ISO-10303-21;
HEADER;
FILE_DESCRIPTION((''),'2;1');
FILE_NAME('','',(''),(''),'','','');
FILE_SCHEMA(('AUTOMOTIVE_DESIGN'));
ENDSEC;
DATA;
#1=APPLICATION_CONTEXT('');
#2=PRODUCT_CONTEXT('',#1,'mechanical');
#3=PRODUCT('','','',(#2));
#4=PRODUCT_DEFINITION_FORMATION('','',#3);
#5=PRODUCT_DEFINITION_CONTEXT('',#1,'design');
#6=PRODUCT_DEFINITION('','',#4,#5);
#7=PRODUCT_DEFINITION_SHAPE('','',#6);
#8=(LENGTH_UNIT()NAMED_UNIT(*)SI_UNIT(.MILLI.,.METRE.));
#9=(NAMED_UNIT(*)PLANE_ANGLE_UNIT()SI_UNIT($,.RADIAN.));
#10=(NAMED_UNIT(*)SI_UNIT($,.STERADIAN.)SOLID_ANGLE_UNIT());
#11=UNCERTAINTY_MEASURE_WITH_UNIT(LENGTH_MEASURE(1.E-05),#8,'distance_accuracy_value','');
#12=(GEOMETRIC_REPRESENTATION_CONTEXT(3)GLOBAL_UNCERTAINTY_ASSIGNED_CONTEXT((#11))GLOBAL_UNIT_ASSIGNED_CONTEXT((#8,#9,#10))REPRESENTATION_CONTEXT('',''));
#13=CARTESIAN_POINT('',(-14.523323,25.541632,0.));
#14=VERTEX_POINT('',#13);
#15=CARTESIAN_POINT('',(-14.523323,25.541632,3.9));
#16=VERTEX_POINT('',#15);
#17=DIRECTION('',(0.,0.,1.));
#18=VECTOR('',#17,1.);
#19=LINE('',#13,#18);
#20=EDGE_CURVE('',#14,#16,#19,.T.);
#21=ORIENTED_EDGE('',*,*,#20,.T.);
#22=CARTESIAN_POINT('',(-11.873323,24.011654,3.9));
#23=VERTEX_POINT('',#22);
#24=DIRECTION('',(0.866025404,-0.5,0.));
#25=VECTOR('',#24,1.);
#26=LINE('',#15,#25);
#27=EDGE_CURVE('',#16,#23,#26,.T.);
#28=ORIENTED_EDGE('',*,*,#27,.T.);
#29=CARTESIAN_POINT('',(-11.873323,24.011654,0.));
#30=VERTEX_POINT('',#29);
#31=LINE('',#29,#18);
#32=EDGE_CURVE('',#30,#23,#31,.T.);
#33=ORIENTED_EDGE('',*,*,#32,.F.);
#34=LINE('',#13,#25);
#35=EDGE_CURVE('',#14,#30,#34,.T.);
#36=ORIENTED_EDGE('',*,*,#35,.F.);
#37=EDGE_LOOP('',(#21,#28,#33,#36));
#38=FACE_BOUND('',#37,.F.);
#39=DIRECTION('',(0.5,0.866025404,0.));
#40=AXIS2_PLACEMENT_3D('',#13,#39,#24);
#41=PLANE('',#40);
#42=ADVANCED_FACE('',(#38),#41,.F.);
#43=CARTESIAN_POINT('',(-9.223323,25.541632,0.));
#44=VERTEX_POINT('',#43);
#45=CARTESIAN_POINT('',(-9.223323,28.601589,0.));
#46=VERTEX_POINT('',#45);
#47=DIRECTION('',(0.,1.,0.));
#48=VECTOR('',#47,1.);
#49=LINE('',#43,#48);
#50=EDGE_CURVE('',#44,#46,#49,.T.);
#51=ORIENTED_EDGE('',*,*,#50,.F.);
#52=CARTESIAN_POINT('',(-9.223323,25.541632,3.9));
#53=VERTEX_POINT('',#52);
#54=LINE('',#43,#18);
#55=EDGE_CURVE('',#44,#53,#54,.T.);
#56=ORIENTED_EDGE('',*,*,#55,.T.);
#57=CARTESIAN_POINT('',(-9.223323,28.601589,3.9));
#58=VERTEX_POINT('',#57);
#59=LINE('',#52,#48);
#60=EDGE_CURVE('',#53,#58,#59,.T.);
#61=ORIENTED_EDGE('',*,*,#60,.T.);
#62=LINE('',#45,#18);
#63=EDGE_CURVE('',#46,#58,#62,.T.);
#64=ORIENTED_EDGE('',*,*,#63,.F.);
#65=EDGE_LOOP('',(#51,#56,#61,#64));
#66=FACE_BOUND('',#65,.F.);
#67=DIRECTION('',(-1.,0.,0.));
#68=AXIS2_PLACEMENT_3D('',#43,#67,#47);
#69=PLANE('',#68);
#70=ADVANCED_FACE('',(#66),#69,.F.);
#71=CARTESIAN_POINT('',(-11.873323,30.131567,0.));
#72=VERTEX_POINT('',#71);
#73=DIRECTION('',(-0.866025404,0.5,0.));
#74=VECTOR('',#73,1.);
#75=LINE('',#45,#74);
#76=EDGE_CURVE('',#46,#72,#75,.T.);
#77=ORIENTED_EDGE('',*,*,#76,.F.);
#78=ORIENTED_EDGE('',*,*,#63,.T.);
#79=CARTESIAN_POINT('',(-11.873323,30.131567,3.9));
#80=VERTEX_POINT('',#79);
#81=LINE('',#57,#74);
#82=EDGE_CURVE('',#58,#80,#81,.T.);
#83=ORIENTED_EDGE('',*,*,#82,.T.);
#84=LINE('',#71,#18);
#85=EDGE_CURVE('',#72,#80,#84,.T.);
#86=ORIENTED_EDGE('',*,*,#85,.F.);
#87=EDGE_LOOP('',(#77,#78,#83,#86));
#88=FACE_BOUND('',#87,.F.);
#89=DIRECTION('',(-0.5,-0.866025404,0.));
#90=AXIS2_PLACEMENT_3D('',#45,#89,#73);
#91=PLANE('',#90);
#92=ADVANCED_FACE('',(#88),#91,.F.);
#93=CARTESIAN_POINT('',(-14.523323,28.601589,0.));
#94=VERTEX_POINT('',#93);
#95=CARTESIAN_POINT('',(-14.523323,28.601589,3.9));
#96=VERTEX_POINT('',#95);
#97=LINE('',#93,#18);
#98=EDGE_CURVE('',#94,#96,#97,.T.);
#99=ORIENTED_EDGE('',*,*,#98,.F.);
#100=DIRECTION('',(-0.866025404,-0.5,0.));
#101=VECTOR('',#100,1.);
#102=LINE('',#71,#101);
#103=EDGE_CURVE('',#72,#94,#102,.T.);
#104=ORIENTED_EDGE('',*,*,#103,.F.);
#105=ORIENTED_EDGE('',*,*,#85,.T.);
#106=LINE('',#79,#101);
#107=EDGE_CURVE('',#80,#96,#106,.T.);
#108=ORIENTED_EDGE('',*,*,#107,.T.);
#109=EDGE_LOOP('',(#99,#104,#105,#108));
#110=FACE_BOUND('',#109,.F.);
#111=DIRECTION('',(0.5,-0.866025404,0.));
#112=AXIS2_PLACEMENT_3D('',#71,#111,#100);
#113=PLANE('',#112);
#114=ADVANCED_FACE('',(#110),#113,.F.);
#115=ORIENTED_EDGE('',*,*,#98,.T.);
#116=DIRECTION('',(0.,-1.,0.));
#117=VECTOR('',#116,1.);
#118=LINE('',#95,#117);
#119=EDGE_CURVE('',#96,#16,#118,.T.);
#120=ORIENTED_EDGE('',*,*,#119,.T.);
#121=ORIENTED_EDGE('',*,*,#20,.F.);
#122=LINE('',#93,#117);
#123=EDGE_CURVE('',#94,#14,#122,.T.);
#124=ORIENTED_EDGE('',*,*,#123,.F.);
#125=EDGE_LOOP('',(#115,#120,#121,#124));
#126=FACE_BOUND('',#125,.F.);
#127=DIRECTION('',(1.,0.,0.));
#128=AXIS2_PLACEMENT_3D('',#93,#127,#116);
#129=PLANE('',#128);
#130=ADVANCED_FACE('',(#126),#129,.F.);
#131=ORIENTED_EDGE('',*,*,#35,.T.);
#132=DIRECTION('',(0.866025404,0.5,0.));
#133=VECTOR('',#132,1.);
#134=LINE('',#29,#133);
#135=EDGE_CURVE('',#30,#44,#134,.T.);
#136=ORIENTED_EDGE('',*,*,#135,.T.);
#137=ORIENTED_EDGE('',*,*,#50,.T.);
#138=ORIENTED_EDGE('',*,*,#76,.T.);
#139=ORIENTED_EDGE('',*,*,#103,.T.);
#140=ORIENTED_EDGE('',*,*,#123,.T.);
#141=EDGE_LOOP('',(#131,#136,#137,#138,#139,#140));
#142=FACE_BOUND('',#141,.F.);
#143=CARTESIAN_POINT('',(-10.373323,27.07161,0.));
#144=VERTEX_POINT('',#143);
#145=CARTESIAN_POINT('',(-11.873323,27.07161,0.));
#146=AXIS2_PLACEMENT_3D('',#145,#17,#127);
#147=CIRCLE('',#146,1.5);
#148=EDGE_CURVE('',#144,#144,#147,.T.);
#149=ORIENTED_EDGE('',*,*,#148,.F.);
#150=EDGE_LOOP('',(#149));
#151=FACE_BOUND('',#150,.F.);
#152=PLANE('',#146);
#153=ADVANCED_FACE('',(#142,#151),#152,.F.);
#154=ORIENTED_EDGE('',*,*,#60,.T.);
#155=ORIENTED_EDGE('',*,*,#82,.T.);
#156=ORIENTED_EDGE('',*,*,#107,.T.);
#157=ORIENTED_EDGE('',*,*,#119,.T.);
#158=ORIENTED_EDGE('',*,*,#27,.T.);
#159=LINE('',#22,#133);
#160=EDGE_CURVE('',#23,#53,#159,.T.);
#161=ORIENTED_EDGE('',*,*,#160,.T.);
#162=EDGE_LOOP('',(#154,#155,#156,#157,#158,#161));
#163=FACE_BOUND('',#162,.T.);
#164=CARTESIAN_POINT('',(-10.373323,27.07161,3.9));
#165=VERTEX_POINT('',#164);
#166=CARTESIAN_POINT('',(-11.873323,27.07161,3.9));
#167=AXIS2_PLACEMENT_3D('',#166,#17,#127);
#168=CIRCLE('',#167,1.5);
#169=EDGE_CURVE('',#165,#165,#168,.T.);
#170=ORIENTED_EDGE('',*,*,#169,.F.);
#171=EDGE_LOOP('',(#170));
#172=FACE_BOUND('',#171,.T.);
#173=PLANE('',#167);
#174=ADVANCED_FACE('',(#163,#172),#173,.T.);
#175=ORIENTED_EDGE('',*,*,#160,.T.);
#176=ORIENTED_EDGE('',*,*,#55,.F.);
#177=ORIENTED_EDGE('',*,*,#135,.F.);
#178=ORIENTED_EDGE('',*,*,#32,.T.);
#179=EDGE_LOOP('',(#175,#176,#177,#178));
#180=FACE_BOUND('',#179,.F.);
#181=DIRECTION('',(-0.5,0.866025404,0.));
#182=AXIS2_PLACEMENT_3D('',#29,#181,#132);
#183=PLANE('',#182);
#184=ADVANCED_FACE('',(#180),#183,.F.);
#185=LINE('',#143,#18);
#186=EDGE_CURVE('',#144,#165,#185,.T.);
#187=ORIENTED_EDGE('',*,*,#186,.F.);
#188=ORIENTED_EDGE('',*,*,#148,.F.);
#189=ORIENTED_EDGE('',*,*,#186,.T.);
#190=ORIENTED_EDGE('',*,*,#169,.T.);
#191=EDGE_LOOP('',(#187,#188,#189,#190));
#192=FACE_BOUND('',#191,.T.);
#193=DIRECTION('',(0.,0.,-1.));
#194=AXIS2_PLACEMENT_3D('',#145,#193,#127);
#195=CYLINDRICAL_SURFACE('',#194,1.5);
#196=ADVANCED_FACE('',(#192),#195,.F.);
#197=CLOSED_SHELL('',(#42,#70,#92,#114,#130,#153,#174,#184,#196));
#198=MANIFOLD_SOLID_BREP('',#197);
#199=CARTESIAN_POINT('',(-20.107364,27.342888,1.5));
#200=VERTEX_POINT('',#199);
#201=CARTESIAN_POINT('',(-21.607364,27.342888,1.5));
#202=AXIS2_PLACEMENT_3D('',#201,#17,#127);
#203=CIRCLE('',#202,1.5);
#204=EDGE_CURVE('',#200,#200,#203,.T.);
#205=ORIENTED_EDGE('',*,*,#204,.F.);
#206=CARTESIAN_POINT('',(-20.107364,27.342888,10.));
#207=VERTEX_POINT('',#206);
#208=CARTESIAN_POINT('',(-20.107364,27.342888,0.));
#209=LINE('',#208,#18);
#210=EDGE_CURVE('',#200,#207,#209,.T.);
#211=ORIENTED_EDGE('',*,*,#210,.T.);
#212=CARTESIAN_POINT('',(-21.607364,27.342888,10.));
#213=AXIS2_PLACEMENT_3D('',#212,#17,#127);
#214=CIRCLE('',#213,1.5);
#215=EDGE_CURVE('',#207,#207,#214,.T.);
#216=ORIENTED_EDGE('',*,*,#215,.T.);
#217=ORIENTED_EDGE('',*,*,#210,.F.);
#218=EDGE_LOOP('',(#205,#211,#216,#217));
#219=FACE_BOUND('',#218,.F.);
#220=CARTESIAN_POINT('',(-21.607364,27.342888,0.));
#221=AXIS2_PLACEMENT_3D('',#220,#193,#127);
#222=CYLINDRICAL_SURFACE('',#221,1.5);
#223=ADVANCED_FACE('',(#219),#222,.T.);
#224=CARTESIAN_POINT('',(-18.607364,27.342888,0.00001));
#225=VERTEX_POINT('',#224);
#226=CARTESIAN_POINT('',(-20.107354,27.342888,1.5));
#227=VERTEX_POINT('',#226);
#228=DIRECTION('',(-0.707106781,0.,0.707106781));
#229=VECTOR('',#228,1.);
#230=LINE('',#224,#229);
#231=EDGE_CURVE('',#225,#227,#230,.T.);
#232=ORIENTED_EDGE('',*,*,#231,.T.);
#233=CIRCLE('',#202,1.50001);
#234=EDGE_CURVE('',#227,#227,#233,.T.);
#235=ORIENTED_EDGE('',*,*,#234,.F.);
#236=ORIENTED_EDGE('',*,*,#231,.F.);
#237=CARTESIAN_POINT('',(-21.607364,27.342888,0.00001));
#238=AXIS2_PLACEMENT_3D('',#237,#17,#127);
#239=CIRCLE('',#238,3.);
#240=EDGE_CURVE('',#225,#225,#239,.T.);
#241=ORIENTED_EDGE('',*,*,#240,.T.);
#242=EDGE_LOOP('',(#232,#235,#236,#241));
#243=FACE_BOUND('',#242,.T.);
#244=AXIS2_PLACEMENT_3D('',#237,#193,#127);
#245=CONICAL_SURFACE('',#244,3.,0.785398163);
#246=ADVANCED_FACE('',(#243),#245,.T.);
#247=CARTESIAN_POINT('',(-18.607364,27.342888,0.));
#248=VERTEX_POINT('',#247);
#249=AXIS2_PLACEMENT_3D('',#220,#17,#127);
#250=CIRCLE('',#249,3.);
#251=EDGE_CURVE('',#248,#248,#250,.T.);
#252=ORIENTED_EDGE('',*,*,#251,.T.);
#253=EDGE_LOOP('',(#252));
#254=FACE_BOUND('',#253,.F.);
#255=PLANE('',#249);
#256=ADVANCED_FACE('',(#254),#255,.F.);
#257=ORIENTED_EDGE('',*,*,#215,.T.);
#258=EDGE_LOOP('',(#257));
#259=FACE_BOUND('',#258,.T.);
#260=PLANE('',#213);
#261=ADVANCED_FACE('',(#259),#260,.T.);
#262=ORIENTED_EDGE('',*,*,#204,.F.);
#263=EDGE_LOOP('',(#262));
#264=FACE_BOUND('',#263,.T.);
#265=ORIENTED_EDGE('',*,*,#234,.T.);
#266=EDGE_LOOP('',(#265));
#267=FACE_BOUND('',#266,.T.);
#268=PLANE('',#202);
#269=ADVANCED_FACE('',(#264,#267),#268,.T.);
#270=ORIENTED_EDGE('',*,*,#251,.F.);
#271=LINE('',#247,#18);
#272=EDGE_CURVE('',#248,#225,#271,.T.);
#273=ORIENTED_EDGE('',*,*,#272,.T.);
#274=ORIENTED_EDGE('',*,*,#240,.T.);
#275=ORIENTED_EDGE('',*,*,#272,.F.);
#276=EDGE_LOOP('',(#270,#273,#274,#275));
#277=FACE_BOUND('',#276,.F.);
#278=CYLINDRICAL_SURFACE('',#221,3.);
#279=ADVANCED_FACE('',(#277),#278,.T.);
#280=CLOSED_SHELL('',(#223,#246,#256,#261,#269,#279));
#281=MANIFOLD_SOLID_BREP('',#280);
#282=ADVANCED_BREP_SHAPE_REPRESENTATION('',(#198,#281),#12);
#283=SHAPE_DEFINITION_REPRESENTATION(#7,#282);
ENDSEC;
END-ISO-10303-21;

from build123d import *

# Parameters (mm, degrees)
F0_R     = 1.5
F1_DEPTH = 10
F0_R_2   = 3
F2_DEPTH = 1.5
F3_SIZE  = 1.49999
F4_DEPTH = 3.9


# Not quite as in the source:
# - a fillet or chamfer is up to 0.001 mm smaller than in the source, because OpenCascade refuses the exact size


with BuildPart() as f1:
    # F0 (on Top) → F1 (new body)
    with BuildSketch(Plane.XY):
        with Locations((-21.6073635966, 27.3428875953)):
            Circle(F0_R)
    extrude(amount=F1_DEPTH)

    # F0 (on Top) → F2 (join)
    with BuildSketch(Plane.XY):
        with Locations((-21.6073635966, 27.3428875953)):
            Circle(F0_R_2)
        with Locations((-21.6073635966, 27.3428875953)):
            Circle(F0_R, mode=Mode.SUBTRACT)
    extrude(amount=F2_DEPTH)

    # F3 (size 1.5 in the source; OpenCascade refuses exactly that, so slightly less here)
    f3_edges = [f1.edges().sort_by_distance(p)[0] for p in [
        (-24.607364, 27.342888, 1.5),
    ]]
    chamfer(f3_edges, length=F3_SIZE)


with BuildPart() as f4:
    # F0 (on Top) → F4 (new body)
    with BuildSketch(Plane.XY):
        Polygon((-9.2233226543, 25.5416321092), (-9.2233226543, 28.6015885359), (-11.8733226543, 30.1315667493), (-14.5233226543, 28.6015885359), (-14.5233226543, 25.5416321092), (-11.8733226543, 24.0116538959), align=None)
        with Locations((-11.8733226543, 27.0716103226)):
            Circle(F0_R, mode=Mode.SUBTRACT)
    extrude(amount=F4_DEPTH)


solid = Compound([f1.part, f4.part])
